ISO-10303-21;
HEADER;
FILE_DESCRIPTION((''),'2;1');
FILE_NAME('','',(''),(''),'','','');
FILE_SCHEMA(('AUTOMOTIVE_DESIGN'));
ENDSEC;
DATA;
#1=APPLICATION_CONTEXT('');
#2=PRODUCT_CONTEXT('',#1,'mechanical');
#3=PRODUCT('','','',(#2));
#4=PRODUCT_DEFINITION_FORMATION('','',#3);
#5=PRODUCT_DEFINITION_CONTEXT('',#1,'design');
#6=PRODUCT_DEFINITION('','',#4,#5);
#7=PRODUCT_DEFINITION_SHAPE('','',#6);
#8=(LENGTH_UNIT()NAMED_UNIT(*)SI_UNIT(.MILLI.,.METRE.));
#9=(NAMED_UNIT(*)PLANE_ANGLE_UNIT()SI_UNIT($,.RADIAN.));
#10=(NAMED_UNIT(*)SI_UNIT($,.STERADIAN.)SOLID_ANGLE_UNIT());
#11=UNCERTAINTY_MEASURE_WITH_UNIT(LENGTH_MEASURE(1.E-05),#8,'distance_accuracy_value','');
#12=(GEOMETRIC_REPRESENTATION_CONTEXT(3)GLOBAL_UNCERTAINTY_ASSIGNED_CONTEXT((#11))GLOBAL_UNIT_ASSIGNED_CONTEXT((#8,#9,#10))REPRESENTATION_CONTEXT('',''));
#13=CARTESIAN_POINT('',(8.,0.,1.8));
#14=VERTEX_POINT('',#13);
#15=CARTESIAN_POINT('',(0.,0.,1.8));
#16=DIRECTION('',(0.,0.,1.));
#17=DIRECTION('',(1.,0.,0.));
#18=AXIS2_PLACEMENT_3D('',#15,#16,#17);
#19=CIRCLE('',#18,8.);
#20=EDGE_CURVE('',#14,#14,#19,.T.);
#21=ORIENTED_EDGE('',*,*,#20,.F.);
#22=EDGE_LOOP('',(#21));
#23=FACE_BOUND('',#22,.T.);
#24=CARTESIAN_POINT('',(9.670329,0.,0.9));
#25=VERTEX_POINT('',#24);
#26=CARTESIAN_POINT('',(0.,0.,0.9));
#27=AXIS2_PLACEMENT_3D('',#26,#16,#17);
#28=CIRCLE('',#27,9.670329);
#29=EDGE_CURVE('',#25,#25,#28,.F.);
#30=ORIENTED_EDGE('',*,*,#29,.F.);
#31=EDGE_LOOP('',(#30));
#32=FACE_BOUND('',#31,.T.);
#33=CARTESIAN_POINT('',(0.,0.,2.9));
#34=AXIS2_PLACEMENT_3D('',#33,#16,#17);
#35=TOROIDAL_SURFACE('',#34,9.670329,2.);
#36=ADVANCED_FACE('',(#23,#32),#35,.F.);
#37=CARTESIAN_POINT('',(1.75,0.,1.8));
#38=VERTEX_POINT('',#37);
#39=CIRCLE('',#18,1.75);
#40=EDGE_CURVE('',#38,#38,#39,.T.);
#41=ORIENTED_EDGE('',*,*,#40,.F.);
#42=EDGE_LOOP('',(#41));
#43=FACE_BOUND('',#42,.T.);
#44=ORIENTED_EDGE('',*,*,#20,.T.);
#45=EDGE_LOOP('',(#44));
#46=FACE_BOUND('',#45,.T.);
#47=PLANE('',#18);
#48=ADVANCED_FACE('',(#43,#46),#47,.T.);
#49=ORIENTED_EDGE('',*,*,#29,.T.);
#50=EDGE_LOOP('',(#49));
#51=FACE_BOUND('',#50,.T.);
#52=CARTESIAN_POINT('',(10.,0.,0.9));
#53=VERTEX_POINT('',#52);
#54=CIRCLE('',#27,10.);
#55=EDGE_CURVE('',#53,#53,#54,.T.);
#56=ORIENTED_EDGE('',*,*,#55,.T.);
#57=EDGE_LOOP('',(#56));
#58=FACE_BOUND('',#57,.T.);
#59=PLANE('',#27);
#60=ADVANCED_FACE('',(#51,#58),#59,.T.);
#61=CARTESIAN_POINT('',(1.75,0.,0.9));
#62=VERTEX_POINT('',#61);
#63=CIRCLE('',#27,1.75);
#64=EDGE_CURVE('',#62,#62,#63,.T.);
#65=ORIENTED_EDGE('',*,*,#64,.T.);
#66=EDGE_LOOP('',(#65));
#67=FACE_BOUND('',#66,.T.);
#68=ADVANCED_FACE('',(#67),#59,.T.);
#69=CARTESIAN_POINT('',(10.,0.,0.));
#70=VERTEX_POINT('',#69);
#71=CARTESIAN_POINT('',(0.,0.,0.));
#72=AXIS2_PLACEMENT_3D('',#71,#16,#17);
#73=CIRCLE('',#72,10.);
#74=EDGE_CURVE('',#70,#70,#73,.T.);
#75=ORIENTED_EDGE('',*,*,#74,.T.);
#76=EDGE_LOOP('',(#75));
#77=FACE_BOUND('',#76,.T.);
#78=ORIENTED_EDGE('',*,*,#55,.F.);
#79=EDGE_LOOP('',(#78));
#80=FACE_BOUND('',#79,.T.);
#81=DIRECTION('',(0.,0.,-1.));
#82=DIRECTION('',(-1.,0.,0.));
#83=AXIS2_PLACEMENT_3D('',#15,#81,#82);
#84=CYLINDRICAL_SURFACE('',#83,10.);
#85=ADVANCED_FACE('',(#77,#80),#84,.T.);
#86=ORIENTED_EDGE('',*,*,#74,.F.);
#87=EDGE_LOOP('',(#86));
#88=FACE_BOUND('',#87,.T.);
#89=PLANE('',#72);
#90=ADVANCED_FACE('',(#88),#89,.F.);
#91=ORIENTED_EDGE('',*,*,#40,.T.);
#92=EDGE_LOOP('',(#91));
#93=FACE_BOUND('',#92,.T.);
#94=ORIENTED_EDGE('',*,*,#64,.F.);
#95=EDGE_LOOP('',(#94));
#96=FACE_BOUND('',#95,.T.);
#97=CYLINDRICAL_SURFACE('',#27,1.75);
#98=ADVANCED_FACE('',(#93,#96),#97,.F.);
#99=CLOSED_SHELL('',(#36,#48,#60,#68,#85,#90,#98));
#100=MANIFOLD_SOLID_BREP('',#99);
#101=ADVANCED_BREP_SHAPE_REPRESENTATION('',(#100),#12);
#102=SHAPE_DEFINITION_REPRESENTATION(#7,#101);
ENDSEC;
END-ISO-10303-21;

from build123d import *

# Parameters (mm, degrees)
SKETCH1_R           = 10
BOSS_EXTRUDE1_DEPTH = 1.8
CUT_EXTRUDE1_START  = -0.9
SKETCH2_R           = 10
SKETCH2_R_2         = 8
CUT_EXTRUDE1_DEPTH  = 0.9
FILLET2_R           = 2
SKETCH3_R           = 1.75
CUT_EXTRUDE2_DEPTH  = 0.9


with BuildPart() as part:
    # Sketch1 → Boss-Extrude1 (new body)
    with BuildSketch(Plane(origin=(0, 0, 0), x_dir=(0, 1, 0), z_dir=(0, 0, 1))):
        with Locations(Location((0, 0, 0), (0, 0, 270))):
            Circle(SKETCH1_R)
    extrude(amount=BOSS_EXTRUDE1_DEPTH)

    # Sketch2 → Cut-Extrude1 (cut)
    with BuildSketch(Plane.XY.offset(1.8).offset(CUT_EXTRUDE1_START)):
        Circle(SKETCH2_R)
        Circle(SKETCH2_R_2, mode=Mode.SUBTRACT)
    extrude(amount=CUT_EXTRUDE1_DEPTH, mode=Mode.SUBTRACT)

    # Fillet2
    # the kernel refuses this fillet: 2 mm, written as the material it adds along each edge
    with BuildSketch(Plane(origin=(0, 0, 0.9), x_dir=(1, 0, 0), z_dir=(0, -1, 0))) as fillet2_piece_1:
        with BuildLine():
            CenterArc((9.670329309, 2), FILLET2_R, 213.367012969, 56.632987031)
            Line((8, 0.9), (7.966593414, 0.878))
            ThreePointArc((7.966593414, 0.878), (7.96, 0.45), (7.96, 0))
            Line((7.96, 0), (8, -0.04))
            Line((8, -0.04), (9.670329309, -0.04))
            Line((9.670329309, -0.04), (9.670329309, 0))
        make_face()
    revolve(axis=Axis((0, 0, 0.9), (0, 0, 1)))

    # Sketch3 → Cut-Extrude2 (cut)
    with BuildSketch(Plane.XY.offset(1.8)):
        Circle(SKETCH3_R)
    extrude(amount=-CUT_EXTRUDE2_DEPTH, mode=Mode.SUBTRACT)


solid = part.part
